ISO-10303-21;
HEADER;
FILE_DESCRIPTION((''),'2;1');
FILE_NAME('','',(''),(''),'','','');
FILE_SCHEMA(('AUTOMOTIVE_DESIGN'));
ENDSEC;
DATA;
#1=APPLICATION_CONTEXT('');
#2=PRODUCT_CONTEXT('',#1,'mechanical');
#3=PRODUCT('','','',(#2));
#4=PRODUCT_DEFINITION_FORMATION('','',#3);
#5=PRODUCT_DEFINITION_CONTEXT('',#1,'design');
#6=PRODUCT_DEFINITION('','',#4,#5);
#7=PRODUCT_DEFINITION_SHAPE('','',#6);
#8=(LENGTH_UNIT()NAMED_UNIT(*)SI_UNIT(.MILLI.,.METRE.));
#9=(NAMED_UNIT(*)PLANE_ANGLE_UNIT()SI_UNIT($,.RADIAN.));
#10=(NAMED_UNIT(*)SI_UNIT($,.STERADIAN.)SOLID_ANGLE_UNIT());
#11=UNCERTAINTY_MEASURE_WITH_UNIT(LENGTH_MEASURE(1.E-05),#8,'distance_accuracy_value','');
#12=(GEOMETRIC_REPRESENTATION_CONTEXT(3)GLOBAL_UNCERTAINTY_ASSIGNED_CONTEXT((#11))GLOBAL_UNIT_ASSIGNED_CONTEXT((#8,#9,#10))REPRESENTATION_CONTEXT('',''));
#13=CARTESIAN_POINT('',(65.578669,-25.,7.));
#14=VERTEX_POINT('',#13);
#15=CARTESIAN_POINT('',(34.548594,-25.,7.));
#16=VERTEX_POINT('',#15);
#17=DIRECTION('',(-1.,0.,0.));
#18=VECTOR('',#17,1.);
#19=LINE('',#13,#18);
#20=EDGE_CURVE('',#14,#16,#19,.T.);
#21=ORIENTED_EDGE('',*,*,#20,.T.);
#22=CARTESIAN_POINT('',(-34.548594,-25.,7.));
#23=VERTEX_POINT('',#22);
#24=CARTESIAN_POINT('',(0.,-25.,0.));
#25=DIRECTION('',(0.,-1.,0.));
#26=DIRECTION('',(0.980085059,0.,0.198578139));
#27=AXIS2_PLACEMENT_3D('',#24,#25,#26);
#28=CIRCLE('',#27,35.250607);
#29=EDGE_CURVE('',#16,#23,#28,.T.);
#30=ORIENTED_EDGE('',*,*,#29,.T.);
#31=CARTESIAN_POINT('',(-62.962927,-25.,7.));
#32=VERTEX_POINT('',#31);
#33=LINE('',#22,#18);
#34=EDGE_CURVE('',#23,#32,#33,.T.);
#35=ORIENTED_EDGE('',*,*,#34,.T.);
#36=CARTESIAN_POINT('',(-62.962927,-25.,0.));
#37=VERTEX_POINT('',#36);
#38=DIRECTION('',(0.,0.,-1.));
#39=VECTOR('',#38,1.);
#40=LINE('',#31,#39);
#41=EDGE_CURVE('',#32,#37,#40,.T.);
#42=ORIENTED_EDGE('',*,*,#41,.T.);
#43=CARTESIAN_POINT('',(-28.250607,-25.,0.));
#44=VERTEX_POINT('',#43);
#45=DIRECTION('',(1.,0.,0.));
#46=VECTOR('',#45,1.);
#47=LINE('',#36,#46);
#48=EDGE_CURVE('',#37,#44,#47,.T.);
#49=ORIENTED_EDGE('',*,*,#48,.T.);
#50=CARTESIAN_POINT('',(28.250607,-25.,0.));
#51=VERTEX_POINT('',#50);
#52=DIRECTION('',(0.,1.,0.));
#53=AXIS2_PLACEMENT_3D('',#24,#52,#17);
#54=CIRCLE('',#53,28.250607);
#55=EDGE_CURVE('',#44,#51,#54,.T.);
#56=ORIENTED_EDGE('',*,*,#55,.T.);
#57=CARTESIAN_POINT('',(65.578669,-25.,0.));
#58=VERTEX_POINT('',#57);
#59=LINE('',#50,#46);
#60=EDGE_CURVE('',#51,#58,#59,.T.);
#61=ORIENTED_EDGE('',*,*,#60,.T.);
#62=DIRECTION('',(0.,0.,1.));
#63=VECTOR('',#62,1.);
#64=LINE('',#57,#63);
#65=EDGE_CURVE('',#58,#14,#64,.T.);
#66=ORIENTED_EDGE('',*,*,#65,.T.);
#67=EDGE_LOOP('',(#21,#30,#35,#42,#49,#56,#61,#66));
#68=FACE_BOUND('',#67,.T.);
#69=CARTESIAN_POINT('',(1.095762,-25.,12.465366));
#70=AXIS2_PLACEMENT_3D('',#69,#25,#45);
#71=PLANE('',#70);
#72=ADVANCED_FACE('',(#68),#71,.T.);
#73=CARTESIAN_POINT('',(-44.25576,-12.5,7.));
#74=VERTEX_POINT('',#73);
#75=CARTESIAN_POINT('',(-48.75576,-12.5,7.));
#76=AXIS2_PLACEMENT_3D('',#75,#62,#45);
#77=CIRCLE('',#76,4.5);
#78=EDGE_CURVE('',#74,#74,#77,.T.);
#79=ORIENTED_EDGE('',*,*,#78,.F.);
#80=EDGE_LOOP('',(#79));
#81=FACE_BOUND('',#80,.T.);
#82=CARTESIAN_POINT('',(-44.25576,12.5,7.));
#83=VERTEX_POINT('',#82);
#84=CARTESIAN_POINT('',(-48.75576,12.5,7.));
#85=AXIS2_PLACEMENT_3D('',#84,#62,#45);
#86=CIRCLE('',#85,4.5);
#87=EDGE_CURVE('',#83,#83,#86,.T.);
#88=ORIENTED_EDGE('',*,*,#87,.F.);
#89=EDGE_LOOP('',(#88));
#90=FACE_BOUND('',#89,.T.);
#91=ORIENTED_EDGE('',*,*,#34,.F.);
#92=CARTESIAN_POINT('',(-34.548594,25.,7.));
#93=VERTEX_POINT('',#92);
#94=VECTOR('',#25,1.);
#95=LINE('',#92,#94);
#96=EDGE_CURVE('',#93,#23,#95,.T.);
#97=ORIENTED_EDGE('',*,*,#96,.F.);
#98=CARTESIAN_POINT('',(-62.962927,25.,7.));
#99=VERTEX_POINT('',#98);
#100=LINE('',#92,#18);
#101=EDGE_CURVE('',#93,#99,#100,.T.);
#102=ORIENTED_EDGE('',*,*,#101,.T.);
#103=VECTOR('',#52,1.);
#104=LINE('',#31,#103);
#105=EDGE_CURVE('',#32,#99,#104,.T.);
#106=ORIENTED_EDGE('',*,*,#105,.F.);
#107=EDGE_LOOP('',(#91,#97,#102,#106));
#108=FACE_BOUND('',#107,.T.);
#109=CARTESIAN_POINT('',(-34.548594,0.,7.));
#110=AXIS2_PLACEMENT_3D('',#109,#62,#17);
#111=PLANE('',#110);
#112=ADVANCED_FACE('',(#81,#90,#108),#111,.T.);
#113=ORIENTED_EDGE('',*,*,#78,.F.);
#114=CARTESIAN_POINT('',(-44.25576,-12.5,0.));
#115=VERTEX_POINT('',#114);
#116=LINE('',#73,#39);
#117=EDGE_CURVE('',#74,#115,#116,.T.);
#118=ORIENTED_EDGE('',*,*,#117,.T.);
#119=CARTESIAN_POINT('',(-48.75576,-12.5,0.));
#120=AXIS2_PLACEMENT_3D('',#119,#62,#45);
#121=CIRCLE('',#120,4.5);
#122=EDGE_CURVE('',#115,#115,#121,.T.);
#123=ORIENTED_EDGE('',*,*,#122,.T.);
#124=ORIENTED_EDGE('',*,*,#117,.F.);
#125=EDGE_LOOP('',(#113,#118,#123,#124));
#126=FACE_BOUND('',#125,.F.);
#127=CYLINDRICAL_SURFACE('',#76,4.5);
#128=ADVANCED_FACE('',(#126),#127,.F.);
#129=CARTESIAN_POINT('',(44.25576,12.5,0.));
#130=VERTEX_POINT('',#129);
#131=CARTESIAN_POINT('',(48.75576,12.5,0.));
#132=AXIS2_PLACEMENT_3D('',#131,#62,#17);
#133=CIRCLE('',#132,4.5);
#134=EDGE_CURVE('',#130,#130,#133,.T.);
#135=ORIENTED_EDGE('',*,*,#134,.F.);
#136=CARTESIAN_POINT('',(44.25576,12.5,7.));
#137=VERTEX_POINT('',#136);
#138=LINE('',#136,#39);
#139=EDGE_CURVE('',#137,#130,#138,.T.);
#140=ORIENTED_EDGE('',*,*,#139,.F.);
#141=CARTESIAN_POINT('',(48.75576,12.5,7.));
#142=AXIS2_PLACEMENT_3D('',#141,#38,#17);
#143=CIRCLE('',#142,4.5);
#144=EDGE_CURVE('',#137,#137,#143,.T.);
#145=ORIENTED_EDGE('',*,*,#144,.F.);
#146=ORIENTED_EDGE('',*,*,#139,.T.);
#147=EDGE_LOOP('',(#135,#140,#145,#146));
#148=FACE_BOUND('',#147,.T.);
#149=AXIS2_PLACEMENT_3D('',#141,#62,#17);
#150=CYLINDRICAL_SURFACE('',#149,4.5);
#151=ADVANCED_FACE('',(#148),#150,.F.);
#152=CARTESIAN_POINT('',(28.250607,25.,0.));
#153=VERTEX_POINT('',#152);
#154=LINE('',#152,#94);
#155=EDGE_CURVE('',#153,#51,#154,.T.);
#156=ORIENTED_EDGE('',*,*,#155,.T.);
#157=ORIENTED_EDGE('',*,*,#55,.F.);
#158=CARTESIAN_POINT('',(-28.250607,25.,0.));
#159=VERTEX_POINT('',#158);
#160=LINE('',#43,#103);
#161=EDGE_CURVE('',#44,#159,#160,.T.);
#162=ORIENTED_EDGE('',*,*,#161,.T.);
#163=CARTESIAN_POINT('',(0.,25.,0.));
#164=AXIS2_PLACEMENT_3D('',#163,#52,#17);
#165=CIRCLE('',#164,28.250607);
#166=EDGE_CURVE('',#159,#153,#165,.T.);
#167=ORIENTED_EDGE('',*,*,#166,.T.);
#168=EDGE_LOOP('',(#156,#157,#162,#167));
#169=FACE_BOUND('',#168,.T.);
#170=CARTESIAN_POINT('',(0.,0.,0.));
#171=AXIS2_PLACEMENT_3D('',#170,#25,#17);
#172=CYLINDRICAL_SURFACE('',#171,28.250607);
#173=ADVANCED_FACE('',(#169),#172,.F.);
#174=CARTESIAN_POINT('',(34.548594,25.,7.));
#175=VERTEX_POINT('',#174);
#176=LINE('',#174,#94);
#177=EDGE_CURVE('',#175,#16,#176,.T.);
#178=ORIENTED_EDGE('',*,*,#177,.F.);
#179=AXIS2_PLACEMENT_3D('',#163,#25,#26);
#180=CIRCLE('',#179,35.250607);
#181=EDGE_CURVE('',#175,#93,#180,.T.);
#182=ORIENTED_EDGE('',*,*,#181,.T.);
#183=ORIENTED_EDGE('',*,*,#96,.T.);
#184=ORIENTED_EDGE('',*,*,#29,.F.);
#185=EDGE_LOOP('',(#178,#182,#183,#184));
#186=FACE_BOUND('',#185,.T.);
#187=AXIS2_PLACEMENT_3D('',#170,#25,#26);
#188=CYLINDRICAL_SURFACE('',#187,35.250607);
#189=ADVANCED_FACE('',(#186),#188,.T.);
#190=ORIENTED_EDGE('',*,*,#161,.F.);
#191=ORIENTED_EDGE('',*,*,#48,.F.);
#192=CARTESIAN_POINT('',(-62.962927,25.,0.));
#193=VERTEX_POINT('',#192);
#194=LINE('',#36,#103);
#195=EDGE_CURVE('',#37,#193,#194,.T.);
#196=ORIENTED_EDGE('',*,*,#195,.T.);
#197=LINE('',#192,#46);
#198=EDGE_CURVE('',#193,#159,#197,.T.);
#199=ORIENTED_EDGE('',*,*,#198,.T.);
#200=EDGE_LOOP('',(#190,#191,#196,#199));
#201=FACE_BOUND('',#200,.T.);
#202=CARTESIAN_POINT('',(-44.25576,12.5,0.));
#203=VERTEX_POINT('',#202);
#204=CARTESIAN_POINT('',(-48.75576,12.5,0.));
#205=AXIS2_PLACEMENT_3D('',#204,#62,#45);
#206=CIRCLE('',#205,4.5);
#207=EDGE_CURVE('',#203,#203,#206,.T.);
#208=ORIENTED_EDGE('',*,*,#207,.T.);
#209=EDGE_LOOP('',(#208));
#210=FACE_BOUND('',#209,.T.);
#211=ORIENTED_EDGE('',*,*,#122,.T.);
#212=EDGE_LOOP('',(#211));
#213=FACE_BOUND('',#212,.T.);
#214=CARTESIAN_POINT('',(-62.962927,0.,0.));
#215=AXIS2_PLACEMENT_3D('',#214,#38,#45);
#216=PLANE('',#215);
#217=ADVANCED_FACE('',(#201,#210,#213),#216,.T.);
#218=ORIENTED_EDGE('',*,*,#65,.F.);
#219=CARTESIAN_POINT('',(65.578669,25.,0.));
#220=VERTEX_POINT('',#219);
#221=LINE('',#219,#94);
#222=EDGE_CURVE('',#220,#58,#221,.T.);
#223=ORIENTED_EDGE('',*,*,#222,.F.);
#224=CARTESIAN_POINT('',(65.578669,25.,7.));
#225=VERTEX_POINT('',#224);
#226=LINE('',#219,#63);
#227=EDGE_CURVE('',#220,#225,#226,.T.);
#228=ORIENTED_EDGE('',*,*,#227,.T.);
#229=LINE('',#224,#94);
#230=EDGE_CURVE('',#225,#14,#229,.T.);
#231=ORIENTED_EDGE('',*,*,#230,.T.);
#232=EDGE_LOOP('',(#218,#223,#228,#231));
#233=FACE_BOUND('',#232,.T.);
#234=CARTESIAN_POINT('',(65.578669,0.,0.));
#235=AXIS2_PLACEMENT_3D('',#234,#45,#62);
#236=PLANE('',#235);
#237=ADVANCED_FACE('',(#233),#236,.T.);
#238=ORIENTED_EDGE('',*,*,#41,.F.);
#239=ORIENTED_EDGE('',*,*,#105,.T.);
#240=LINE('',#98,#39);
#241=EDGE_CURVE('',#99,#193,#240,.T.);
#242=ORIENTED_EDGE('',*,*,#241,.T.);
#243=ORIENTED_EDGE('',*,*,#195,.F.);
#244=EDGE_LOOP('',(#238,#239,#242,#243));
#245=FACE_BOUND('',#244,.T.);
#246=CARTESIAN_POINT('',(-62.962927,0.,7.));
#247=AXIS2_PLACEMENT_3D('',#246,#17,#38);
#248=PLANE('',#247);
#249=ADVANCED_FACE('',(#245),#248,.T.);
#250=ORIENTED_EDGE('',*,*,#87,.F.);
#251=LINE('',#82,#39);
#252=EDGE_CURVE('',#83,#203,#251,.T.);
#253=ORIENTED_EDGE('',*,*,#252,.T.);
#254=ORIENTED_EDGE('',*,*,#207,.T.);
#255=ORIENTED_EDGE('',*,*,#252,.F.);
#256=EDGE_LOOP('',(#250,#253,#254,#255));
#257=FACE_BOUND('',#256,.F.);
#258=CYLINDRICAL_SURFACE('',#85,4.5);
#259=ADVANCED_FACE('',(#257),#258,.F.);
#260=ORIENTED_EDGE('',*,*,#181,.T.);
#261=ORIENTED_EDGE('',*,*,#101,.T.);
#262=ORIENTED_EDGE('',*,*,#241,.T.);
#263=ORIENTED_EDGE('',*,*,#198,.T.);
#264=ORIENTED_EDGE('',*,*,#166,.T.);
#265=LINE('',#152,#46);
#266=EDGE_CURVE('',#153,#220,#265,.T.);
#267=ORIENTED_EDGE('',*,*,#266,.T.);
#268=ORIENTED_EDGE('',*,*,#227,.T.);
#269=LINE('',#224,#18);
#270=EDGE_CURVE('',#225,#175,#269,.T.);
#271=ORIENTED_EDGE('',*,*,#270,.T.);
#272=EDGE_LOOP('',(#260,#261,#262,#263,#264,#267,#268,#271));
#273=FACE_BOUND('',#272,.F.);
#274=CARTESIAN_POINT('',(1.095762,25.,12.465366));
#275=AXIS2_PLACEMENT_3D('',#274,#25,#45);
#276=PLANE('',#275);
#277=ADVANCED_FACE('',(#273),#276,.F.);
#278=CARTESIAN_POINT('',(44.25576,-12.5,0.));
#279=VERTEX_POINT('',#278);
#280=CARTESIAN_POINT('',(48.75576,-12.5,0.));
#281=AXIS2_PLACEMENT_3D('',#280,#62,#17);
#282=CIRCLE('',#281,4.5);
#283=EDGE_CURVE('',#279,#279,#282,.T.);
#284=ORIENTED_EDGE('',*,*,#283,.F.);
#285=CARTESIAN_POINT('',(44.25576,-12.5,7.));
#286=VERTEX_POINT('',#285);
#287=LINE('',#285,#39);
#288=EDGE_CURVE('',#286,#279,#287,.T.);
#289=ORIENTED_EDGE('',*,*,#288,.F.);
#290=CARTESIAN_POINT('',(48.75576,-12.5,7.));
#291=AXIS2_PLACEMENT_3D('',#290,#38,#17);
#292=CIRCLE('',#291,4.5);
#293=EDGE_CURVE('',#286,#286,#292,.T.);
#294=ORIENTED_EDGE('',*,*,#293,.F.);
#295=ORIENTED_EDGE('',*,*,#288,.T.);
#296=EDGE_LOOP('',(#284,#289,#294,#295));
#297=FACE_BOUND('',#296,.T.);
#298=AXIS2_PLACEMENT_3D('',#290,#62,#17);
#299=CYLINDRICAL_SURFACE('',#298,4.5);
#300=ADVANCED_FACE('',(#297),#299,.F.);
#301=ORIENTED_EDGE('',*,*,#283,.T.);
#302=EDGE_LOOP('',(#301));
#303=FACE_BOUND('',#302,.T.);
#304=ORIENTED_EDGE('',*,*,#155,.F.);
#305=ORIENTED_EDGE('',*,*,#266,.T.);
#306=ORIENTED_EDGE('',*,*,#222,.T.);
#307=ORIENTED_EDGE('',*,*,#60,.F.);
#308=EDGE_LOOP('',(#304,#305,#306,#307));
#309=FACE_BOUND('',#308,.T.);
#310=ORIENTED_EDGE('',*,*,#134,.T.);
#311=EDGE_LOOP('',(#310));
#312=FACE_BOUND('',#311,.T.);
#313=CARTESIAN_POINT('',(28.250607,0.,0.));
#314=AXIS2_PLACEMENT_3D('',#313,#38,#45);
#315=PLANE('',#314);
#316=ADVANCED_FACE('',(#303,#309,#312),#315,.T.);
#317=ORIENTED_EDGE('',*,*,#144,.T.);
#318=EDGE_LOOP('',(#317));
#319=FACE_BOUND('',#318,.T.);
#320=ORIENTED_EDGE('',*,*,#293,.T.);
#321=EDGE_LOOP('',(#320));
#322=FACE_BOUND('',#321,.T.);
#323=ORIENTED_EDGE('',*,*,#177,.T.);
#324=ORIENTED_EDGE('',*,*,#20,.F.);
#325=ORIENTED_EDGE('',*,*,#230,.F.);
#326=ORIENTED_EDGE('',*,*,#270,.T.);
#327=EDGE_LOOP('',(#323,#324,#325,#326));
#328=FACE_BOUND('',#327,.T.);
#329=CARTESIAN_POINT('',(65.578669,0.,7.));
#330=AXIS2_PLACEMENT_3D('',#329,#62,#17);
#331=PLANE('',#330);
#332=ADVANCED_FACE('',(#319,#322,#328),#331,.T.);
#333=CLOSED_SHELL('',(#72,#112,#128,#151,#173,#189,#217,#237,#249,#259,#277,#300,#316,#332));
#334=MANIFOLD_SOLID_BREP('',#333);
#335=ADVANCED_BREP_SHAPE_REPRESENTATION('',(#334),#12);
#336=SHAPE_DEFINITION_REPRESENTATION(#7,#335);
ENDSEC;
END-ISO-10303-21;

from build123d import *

# Parameters (mm, degrees)
F1_DEPTH = 25
F2_R     = 4.5
F3_DEPTH = 7.001


# Not quite as in the source:
# - a pattern or mirror of a feature is missing from the dataset's text; its kind, count and spacing are read off the source's solid


with BuildPart() as f1:
    # F0 (on Front) → F1 (new body, symmetric)
    with BuildSketch(Plane.XZ):
        with BuildLine():
            ThreePointArc((-28.2506073348, 0), (0, 28.2506073348), (28.2506073348, 0))
            Line((28.2506073348, 0), (65.5786693096, 0))
            Line((65.5786693096, 0), (65.5786693096, 7))
            Line((65.5786693096, 7), (34.5485935672, 7))
            ThreePointArc((34.5485935672, 7), (0, 35.2506073348), (-34.5485935672, 7))
            Line((-34.5485935672, 7), (-62.9629269242, 7))
            Line((-62.9629269242, 7), (-62.9629269242, 0))
            Line((-62.9629269242, 0), (-28.2506073348, 0))
        make_face()
    extrude(amount=F1_DEPTH, both=True)

    # F2 (on face) → F3 (cut, through all)
    with BuildSketch(Plane.XY.offset(7)):
        with Locations((-48.7557602457, -12.5)):
            Circle(F2_R)
        with Locations((-48.7557602457, 12.5)):
            Circle(F2_R)
    f3 = extrude(amount=-F3_DEPTH, mode=Mode.SUBTRACT)

    # F3_copies: F3 across plane
    add(f3.mirror(Plane(origin=(0, 0, 0), x_dir=(0, 0, 1), z_dir=(1, 0, 0))), mode=Mode.SUBTRACT)


solid = f1.part
